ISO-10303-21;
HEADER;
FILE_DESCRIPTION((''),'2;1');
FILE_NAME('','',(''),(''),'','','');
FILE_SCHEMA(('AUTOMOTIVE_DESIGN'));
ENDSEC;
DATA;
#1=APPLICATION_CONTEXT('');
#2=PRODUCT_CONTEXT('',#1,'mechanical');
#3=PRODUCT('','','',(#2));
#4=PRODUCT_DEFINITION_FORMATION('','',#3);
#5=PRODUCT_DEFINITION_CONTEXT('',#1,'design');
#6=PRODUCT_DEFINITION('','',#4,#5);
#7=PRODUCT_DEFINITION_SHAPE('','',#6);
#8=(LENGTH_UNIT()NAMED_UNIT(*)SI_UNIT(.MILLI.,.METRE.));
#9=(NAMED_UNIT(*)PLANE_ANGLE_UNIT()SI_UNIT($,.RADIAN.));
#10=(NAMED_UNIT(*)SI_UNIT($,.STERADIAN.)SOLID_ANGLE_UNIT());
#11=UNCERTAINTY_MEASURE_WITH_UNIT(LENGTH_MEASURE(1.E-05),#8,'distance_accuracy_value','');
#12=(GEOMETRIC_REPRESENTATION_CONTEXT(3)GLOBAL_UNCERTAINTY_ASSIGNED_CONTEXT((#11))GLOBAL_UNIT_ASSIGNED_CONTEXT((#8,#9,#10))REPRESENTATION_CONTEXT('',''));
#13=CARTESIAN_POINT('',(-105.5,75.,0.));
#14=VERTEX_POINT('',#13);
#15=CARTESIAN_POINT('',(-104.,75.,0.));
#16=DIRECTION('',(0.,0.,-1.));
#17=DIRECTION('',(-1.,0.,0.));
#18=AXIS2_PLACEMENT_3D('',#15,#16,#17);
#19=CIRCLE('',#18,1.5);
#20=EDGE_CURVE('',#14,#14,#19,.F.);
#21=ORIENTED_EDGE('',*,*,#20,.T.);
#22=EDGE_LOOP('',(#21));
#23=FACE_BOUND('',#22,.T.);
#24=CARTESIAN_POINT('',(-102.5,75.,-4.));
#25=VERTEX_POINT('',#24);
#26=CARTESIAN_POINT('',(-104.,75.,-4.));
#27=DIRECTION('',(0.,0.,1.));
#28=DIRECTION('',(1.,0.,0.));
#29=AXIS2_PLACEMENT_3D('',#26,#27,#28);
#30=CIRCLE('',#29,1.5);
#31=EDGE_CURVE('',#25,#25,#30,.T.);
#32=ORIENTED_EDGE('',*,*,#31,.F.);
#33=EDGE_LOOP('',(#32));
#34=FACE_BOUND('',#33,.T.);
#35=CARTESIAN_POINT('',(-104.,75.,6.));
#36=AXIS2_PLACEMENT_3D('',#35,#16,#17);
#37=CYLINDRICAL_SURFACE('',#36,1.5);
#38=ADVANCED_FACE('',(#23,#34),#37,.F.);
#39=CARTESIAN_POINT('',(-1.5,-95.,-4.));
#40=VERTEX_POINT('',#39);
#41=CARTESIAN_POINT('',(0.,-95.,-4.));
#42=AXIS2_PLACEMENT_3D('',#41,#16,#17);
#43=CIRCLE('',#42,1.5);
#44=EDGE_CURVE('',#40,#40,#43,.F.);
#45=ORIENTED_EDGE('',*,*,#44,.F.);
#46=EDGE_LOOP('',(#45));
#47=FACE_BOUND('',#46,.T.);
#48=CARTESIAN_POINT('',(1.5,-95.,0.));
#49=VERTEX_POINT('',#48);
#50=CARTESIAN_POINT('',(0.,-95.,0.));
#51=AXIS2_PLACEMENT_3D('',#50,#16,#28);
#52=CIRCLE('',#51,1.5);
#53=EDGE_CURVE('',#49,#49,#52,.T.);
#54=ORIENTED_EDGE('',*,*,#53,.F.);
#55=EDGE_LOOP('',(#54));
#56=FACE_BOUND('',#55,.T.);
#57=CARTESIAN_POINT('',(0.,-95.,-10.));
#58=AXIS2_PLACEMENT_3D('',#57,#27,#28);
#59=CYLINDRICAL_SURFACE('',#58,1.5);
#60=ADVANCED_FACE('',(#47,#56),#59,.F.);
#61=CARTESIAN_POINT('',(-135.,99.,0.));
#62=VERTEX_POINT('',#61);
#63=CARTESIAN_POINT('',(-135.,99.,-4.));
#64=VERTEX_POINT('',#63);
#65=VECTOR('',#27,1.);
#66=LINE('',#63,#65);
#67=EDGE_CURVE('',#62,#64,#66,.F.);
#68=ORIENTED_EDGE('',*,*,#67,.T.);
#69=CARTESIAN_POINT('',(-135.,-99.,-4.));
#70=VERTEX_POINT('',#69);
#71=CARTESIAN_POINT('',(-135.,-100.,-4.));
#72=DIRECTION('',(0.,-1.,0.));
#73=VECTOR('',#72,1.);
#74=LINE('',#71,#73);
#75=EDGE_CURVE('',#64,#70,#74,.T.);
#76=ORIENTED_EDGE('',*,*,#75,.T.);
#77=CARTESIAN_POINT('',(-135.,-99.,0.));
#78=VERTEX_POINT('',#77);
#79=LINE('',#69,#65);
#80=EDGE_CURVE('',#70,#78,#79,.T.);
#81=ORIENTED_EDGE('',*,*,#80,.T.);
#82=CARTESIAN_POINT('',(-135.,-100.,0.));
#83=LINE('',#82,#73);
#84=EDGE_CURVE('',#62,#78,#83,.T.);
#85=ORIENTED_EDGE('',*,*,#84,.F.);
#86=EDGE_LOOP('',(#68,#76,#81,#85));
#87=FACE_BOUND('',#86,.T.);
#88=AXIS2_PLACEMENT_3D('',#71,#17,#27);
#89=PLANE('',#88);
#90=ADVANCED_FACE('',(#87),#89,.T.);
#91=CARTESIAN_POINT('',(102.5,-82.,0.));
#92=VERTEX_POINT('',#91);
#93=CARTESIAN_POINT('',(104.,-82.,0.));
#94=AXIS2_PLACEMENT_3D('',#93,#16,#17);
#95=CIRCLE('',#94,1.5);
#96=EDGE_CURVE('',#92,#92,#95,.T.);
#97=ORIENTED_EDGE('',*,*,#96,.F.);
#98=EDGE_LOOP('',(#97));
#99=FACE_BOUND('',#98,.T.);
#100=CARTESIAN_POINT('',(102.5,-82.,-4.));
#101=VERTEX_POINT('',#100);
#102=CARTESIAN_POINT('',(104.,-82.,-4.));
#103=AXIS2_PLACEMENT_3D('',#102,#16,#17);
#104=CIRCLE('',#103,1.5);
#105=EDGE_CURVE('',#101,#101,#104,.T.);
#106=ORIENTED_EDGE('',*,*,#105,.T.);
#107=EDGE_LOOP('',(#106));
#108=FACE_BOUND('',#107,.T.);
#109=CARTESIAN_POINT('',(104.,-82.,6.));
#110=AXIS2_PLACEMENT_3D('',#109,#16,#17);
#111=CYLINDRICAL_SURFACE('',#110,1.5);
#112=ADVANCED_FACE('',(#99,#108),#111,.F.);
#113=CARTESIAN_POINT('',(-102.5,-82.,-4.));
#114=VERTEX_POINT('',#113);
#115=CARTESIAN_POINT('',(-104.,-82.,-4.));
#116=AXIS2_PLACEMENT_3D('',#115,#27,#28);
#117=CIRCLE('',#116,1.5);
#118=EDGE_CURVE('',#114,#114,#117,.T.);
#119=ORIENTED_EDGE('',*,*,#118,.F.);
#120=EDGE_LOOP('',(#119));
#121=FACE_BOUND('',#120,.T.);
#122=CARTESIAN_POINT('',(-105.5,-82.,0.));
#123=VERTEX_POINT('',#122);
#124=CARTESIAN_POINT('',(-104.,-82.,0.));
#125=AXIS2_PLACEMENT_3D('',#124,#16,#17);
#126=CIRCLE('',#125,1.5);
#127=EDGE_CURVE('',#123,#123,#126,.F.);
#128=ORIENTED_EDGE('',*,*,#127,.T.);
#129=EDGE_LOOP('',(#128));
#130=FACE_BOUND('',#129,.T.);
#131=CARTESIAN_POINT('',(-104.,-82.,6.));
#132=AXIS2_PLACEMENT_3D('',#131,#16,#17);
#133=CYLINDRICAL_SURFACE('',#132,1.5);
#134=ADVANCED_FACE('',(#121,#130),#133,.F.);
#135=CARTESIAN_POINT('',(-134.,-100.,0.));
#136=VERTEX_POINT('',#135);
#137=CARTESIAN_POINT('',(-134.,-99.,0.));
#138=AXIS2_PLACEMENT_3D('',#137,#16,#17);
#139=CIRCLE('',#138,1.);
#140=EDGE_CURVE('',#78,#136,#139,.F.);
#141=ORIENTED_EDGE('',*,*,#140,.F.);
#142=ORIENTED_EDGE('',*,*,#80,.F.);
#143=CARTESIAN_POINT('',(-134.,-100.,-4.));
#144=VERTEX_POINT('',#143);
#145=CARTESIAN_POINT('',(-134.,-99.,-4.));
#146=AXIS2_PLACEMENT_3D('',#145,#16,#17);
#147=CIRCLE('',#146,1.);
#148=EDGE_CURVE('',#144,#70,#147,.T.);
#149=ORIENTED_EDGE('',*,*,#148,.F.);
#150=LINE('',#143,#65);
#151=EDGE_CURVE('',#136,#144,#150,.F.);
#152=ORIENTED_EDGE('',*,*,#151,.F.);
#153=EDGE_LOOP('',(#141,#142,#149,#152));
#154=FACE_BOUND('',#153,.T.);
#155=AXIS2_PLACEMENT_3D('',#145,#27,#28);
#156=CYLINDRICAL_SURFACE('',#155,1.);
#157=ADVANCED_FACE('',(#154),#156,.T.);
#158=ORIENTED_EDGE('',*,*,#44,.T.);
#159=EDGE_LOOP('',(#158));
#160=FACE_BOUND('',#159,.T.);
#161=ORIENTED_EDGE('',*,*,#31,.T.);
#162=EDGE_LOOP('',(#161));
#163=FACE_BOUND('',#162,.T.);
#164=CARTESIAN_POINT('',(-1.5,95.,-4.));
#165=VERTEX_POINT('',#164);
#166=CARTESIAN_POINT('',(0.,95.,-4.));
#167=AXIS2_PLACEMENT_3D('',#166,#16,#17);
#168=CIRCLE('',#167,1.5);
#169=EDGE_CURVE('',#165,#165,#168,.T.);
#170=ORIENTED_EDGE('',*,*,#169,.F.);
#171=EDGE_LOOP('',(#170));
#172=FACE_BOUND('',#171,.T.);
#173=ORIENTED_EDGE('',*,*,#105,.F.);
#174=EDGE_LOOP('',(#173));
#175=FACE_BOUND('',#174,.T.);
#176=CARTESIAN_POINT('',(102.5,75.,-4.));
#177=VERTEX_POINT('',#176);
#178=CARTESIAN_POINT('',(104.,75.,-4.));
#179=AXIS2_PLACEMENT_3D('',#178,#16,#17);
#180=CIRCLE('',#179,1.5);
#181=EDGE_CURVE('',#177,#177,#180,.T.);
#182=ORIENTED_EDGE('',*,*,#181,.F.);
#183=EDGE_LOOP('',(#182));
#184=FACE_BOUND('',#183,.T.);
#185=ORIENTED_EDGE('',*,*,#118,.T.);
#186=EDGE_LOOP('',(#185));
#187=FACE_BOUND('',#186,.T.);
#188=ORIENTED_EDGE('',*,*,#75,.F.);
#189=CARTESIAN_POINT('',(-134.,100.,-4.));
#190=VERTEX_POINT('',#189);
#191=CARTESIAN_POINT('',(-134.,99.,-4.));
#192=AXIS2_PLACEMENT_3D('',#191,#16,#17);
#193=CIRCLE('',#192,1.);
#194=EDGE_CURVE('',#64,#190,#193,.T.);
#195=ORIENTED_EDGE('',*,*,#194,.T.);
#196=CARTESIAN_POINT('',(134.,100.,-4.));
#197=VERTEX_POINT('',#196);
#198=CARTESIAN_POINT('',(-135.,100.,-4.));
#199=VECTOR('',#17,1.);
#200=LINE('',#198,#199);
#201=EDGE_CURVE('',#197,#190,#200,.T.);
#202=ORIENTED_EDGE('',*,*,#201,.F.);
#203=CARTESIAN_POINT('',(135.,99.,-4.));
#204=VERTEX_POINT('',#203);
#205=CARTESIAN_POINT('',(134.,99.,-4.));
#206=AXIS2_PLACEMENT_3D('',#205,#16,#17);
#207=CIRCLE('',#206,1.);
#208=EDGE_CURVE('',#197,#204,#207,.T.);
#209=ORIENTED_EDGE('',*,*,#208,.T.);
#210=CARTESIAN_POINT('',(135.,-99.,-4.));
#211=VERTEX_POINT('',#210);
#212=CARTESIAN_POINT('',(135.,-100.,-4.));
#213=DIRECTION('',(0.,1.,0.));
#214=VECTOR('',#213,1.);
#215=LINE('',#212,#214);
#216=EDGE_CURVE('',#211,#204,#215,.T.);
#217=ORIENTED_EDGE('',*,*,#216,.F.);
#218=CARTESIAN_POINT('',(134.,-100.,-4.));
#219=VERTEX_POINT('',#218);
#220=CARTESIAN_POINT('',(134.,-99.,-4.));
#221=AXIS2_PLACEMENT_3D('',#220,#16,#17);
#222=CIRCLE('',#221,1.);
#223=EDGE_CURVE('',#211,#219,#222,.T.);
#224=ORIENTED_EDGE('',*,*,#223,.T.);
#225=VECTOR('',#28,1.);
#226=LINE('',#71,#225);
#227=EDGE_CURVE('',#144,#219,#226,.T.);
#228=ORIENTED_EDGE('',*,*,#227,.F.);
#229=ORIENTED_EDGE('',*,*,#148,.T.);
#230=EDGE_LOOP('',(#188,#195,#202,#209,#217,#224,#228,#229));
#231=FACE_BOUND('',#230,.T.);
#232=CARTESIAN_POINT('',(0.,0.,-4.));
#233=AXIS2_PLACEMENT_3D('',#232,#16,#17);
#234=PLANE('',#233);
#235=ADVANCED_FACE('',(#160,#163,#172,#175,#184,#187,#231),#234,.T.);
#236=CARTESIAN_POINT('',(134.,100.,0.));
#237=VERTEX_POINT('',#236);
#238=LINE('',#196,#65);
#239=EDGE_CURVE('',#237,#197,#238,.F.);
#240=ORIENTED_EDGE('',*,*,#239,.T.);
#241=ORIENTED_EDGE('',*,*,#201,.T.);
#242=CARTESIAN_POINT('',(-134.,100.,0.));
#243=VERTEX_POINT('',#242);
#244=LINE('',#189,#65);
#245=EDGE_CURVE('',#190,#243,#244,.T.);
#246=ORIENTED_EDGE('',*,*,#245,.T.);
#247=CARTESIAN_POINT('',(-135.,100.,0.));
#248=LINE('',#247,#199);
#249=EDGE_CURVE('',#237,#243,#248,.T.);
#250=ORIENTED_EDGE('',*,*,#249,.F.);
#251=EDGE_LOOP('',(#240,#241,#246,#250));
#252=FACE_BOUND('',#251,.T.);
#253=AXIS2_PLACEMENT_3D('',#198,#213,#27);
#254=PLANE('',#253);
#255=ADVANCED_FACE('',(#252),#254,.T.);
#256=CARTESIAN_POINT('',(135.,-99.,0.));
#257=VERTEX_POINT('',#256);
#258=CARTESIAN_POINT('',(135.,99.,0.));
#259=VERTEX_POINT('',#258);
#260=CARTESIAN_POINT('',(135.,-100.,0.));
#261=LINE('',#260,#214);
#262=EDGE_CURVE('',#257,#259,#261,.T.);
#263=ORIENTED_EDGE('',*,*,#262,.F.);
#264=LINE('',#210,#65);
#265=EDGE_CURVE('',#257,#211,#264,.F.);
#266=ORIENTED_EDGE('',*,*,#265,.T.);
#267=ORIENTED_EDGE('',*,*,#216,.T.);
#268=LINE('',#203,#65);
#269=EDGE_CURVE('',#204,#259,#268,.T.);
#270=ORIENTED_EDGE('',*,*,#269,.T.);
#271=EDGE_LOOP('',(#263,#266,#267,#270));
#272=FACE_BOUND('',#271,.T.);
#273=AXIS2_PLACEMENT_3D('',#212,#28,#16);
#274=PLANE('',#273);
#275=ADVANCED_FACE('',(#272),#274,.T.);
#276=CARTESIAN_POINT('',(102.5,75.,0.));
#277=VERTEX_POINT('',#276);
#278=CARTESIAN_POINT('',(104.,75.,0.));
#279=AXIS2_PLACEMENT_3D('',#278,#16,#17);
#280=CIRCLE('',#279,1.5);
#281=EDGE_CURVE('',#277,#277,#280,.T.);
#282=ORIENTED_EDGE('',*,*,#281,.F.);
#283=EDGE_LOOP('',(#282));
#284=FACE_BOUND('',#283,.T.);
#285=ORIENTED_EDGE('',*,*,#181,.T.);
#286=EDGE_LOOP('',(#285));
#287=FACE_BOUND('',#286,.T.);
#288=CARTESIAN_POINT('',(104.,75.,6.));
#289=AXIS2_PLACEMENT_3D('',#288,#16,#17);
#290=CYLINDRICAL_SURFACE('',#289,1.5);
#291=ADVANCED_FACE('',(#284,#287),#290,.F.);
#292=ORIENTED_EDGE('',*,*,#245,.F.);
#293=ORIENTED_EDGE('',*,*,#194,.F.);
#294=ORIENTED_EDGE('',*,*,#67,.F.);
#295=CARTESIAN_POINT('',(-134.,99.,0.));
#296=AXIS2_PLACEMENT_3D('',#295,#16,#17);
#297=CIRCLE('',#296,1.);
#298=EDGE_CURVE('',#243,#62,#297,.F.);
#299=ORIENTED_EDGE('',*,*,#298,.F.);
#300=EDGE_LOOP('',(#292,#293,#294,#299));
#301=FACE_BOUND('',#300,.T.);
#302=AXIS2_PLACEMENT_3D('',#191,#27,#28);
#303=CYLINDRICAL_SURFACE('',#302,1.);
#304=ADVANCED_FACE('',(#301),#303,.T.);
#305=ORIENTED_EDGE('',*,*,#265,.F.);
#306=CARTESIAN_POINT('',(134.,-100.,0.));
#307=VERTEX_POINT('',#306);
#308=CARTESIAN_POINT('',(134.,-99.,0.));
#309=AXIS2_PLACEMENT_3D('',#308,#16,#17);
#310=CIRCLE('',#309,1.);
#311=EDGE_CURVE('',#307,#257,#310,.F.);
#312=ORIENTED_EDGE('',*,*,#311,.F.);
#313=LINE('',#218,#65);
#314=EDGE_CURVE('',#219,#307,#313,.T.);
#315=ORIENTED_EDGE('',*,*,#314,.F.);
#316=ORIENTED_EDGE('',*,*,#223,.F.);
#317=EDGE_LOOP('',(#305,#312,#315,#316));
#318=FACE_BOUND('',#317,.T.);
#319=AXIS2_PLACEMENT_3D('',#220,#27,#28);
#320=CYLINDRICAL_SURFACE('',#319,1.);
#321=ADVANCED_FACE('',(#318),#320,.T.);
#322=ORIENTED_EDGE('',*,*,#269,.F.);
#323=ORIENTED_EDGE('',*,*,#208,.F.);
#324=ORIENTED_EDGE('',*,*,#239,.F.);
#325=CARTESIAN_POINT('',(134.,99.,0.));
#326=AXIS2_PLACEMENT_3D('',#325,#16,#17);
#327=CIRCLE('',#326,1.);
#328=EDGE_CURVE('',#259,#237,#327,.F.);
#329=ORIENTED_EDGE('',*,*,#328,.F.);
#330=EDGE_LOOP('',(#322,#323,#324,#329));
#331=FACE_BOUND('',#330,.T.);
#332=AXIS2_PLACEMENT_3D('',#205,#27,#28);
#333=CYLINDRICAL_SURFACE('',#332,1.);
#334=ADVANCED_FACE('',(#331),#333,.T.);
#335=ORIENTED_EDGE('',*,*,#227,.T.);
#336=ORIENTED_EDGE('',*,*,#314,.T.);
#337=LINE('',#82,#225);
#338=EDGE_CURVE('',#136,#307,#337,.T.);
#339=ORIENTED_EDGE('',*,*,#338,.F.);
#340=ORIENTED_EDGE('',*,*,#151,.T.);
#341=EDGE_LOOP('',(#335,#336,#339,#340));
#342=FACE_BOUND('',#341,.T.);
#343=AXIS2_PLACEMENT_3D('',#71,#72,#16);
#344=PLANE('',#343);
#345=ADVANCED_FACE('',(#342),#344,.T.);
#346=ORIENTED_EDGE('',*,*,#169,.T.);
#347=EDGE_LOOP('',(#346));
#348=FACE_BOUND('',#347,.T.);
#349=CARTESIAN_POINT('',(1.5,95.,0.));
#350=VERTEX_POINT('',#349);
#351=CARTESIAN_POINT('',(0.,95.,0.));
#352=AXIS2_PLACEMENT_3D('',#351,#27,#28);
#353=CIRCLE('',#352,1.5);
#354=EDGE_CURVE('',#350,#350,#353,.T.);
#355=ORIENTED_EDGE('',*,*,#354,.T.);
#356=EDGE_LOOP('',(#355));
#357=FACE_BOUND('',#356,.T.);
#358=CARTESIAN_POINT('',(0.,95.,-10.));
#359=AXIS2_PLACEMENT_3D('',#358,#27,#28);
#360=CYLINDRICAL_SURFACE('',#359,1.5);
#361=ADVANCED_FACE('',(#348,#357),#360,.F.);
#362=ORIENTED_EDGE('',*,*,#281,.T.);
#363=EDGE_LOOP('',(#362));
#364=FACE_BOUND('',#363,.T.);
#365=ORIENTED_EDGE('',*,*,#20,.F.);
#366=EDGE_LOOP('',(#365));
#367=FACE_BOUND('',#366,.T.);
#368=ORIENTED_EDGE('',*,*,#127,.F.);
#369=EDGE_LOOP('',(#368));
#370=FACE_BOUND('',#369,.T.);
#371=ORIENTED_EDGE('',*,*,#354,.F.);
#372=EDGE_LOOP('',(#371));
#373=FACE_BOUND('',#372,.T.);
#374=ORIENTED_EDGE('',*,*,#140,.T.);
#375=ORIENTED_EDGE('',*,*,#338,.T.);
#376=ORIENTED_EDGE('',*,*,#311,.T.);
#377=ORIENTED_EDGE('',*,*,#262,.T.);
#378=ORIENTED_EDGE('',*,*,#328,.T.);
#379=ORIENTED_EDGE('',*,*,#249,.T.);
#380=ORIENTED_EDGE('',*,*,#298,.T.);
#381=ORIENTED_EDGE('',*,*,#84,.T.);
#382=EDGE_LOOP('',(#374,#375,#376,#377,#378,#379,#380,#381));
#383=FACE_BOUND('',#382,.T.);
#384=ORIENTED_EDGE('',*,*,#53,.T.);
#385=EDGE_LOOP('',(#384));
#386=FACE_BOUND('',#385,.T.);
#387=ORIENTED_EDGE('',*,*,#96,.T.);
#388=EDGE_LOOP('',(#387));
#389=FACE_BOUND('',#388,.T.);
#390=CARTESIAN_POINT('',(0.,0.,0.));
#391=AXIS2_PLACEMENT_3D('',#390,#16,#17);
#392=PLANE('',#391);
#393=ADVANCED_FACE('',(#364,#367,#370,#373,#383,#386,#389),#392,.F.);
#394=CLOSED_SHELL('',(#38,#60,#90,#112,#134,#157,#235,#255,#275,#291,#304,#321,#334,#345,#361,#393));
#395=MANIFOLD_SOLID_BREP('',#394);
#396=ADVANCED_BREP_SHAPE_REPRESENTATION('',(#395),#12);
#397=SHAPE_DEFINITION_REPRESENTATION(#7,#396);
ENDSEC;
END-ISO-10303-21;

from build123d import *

# Parameters (mm, degrees)
SKETCH_1_W             = 270
SKETCH_1_H             = 200
SM_BASE_FLANGE_1_DEPTH = 4
SKETCH_6_R             = 1.5
CUT_EXTRUDE_1_DEPTH    = 10
FILLET_1_R             = 1
SKETCH_7_R             = 1.5
CUT_EXTRUDE_2_DEPTH    = 10
SKETCH_8_R             = 1.5
CUT_EXTRUDE_3_DEPTH    = 10


# Sheet-metal steps are written as plain solids
with BuildPart() as part:
    # Sketch 1 → 基体-法兰1 (new body)
    with BuildSketch(Plane.XY):
        Rectangle(SKETCH_1_W, SKETCH_1_H)
    extrude(amount=-SM_BASE_FLANGE_1_DEPTH)

    # 草图6 → 切除-拉伸1 (cut)
    with BuildSketch(Plane.XY):
        with Locations((0, 95)):
            Circle(SKETCH_6_R)
    cut_extrude_1 = extrude(amount=-CUT_EXTRUDE_1_DEPTH, mode=Mode.SUBTRACT)

    # 镜向1: 切除-拉伸1 across plane
    add(cut_extrude_1.mirror(Plane.ZX), mode=Mode.SUBTRACT)

    # 圆角1
    fillet_1_edges = [part.edges().sort_by_distance(p)[0] for p in [
        (135, -100, -2),
        (-135, -100, -2),
        (-135, 100, -2),
        (135, 100, -2),
    ]]
    fillet(fillet_1_edges, radius=FILLET_1_R)

    # 草图7 → 切除-拉伸2 (cut)
    with BuildSketch(Plane(origin=(0, 0, -4), x_dir=(-1, 0, 0), z_dir=(0, 0, -1))):
        with Locations((-104, 75)):
            Circle(SKETCH_7_R)
    cut_extrude_2 = extrude(amount=-CUT_EXTRUDE_2_DEPTH, mode=Mode.SUBTRACT)

    # 镜向2: 切除-拉伸2 across plane
    add(cut_extrude_2.mirror(Plane(origin=(0, 0, 0), x_dir=(0, 0, 1), z_dir=(1, 0, 0))), mode=Mode.SUBTRACT)

    # 草图8 → 切除-拉伸3 (cut)
    with BuildSketch(Plane(origin=(0, 0, -4), x_dir=(-1, 0, 0), z_dir=(0, 0, -1))):
        with Locations((-104, -82)):
            Circle(SKETCH_8_R)
    cut_extrude_3 = extrude(amount=-CUT_EXTRUDE_3_DEPTH, mode=Mode.SUBTRACT)

    # 镜向3: 切除-拉伸3 across plane
    add(cut_extrude_3.mirror(Plane(origin=(0, 0, 0), x_dir=(0, 0, 1), z_dir=(1, 0, 0))), mode=Mode.SUBTRACT)


solid = part.part
